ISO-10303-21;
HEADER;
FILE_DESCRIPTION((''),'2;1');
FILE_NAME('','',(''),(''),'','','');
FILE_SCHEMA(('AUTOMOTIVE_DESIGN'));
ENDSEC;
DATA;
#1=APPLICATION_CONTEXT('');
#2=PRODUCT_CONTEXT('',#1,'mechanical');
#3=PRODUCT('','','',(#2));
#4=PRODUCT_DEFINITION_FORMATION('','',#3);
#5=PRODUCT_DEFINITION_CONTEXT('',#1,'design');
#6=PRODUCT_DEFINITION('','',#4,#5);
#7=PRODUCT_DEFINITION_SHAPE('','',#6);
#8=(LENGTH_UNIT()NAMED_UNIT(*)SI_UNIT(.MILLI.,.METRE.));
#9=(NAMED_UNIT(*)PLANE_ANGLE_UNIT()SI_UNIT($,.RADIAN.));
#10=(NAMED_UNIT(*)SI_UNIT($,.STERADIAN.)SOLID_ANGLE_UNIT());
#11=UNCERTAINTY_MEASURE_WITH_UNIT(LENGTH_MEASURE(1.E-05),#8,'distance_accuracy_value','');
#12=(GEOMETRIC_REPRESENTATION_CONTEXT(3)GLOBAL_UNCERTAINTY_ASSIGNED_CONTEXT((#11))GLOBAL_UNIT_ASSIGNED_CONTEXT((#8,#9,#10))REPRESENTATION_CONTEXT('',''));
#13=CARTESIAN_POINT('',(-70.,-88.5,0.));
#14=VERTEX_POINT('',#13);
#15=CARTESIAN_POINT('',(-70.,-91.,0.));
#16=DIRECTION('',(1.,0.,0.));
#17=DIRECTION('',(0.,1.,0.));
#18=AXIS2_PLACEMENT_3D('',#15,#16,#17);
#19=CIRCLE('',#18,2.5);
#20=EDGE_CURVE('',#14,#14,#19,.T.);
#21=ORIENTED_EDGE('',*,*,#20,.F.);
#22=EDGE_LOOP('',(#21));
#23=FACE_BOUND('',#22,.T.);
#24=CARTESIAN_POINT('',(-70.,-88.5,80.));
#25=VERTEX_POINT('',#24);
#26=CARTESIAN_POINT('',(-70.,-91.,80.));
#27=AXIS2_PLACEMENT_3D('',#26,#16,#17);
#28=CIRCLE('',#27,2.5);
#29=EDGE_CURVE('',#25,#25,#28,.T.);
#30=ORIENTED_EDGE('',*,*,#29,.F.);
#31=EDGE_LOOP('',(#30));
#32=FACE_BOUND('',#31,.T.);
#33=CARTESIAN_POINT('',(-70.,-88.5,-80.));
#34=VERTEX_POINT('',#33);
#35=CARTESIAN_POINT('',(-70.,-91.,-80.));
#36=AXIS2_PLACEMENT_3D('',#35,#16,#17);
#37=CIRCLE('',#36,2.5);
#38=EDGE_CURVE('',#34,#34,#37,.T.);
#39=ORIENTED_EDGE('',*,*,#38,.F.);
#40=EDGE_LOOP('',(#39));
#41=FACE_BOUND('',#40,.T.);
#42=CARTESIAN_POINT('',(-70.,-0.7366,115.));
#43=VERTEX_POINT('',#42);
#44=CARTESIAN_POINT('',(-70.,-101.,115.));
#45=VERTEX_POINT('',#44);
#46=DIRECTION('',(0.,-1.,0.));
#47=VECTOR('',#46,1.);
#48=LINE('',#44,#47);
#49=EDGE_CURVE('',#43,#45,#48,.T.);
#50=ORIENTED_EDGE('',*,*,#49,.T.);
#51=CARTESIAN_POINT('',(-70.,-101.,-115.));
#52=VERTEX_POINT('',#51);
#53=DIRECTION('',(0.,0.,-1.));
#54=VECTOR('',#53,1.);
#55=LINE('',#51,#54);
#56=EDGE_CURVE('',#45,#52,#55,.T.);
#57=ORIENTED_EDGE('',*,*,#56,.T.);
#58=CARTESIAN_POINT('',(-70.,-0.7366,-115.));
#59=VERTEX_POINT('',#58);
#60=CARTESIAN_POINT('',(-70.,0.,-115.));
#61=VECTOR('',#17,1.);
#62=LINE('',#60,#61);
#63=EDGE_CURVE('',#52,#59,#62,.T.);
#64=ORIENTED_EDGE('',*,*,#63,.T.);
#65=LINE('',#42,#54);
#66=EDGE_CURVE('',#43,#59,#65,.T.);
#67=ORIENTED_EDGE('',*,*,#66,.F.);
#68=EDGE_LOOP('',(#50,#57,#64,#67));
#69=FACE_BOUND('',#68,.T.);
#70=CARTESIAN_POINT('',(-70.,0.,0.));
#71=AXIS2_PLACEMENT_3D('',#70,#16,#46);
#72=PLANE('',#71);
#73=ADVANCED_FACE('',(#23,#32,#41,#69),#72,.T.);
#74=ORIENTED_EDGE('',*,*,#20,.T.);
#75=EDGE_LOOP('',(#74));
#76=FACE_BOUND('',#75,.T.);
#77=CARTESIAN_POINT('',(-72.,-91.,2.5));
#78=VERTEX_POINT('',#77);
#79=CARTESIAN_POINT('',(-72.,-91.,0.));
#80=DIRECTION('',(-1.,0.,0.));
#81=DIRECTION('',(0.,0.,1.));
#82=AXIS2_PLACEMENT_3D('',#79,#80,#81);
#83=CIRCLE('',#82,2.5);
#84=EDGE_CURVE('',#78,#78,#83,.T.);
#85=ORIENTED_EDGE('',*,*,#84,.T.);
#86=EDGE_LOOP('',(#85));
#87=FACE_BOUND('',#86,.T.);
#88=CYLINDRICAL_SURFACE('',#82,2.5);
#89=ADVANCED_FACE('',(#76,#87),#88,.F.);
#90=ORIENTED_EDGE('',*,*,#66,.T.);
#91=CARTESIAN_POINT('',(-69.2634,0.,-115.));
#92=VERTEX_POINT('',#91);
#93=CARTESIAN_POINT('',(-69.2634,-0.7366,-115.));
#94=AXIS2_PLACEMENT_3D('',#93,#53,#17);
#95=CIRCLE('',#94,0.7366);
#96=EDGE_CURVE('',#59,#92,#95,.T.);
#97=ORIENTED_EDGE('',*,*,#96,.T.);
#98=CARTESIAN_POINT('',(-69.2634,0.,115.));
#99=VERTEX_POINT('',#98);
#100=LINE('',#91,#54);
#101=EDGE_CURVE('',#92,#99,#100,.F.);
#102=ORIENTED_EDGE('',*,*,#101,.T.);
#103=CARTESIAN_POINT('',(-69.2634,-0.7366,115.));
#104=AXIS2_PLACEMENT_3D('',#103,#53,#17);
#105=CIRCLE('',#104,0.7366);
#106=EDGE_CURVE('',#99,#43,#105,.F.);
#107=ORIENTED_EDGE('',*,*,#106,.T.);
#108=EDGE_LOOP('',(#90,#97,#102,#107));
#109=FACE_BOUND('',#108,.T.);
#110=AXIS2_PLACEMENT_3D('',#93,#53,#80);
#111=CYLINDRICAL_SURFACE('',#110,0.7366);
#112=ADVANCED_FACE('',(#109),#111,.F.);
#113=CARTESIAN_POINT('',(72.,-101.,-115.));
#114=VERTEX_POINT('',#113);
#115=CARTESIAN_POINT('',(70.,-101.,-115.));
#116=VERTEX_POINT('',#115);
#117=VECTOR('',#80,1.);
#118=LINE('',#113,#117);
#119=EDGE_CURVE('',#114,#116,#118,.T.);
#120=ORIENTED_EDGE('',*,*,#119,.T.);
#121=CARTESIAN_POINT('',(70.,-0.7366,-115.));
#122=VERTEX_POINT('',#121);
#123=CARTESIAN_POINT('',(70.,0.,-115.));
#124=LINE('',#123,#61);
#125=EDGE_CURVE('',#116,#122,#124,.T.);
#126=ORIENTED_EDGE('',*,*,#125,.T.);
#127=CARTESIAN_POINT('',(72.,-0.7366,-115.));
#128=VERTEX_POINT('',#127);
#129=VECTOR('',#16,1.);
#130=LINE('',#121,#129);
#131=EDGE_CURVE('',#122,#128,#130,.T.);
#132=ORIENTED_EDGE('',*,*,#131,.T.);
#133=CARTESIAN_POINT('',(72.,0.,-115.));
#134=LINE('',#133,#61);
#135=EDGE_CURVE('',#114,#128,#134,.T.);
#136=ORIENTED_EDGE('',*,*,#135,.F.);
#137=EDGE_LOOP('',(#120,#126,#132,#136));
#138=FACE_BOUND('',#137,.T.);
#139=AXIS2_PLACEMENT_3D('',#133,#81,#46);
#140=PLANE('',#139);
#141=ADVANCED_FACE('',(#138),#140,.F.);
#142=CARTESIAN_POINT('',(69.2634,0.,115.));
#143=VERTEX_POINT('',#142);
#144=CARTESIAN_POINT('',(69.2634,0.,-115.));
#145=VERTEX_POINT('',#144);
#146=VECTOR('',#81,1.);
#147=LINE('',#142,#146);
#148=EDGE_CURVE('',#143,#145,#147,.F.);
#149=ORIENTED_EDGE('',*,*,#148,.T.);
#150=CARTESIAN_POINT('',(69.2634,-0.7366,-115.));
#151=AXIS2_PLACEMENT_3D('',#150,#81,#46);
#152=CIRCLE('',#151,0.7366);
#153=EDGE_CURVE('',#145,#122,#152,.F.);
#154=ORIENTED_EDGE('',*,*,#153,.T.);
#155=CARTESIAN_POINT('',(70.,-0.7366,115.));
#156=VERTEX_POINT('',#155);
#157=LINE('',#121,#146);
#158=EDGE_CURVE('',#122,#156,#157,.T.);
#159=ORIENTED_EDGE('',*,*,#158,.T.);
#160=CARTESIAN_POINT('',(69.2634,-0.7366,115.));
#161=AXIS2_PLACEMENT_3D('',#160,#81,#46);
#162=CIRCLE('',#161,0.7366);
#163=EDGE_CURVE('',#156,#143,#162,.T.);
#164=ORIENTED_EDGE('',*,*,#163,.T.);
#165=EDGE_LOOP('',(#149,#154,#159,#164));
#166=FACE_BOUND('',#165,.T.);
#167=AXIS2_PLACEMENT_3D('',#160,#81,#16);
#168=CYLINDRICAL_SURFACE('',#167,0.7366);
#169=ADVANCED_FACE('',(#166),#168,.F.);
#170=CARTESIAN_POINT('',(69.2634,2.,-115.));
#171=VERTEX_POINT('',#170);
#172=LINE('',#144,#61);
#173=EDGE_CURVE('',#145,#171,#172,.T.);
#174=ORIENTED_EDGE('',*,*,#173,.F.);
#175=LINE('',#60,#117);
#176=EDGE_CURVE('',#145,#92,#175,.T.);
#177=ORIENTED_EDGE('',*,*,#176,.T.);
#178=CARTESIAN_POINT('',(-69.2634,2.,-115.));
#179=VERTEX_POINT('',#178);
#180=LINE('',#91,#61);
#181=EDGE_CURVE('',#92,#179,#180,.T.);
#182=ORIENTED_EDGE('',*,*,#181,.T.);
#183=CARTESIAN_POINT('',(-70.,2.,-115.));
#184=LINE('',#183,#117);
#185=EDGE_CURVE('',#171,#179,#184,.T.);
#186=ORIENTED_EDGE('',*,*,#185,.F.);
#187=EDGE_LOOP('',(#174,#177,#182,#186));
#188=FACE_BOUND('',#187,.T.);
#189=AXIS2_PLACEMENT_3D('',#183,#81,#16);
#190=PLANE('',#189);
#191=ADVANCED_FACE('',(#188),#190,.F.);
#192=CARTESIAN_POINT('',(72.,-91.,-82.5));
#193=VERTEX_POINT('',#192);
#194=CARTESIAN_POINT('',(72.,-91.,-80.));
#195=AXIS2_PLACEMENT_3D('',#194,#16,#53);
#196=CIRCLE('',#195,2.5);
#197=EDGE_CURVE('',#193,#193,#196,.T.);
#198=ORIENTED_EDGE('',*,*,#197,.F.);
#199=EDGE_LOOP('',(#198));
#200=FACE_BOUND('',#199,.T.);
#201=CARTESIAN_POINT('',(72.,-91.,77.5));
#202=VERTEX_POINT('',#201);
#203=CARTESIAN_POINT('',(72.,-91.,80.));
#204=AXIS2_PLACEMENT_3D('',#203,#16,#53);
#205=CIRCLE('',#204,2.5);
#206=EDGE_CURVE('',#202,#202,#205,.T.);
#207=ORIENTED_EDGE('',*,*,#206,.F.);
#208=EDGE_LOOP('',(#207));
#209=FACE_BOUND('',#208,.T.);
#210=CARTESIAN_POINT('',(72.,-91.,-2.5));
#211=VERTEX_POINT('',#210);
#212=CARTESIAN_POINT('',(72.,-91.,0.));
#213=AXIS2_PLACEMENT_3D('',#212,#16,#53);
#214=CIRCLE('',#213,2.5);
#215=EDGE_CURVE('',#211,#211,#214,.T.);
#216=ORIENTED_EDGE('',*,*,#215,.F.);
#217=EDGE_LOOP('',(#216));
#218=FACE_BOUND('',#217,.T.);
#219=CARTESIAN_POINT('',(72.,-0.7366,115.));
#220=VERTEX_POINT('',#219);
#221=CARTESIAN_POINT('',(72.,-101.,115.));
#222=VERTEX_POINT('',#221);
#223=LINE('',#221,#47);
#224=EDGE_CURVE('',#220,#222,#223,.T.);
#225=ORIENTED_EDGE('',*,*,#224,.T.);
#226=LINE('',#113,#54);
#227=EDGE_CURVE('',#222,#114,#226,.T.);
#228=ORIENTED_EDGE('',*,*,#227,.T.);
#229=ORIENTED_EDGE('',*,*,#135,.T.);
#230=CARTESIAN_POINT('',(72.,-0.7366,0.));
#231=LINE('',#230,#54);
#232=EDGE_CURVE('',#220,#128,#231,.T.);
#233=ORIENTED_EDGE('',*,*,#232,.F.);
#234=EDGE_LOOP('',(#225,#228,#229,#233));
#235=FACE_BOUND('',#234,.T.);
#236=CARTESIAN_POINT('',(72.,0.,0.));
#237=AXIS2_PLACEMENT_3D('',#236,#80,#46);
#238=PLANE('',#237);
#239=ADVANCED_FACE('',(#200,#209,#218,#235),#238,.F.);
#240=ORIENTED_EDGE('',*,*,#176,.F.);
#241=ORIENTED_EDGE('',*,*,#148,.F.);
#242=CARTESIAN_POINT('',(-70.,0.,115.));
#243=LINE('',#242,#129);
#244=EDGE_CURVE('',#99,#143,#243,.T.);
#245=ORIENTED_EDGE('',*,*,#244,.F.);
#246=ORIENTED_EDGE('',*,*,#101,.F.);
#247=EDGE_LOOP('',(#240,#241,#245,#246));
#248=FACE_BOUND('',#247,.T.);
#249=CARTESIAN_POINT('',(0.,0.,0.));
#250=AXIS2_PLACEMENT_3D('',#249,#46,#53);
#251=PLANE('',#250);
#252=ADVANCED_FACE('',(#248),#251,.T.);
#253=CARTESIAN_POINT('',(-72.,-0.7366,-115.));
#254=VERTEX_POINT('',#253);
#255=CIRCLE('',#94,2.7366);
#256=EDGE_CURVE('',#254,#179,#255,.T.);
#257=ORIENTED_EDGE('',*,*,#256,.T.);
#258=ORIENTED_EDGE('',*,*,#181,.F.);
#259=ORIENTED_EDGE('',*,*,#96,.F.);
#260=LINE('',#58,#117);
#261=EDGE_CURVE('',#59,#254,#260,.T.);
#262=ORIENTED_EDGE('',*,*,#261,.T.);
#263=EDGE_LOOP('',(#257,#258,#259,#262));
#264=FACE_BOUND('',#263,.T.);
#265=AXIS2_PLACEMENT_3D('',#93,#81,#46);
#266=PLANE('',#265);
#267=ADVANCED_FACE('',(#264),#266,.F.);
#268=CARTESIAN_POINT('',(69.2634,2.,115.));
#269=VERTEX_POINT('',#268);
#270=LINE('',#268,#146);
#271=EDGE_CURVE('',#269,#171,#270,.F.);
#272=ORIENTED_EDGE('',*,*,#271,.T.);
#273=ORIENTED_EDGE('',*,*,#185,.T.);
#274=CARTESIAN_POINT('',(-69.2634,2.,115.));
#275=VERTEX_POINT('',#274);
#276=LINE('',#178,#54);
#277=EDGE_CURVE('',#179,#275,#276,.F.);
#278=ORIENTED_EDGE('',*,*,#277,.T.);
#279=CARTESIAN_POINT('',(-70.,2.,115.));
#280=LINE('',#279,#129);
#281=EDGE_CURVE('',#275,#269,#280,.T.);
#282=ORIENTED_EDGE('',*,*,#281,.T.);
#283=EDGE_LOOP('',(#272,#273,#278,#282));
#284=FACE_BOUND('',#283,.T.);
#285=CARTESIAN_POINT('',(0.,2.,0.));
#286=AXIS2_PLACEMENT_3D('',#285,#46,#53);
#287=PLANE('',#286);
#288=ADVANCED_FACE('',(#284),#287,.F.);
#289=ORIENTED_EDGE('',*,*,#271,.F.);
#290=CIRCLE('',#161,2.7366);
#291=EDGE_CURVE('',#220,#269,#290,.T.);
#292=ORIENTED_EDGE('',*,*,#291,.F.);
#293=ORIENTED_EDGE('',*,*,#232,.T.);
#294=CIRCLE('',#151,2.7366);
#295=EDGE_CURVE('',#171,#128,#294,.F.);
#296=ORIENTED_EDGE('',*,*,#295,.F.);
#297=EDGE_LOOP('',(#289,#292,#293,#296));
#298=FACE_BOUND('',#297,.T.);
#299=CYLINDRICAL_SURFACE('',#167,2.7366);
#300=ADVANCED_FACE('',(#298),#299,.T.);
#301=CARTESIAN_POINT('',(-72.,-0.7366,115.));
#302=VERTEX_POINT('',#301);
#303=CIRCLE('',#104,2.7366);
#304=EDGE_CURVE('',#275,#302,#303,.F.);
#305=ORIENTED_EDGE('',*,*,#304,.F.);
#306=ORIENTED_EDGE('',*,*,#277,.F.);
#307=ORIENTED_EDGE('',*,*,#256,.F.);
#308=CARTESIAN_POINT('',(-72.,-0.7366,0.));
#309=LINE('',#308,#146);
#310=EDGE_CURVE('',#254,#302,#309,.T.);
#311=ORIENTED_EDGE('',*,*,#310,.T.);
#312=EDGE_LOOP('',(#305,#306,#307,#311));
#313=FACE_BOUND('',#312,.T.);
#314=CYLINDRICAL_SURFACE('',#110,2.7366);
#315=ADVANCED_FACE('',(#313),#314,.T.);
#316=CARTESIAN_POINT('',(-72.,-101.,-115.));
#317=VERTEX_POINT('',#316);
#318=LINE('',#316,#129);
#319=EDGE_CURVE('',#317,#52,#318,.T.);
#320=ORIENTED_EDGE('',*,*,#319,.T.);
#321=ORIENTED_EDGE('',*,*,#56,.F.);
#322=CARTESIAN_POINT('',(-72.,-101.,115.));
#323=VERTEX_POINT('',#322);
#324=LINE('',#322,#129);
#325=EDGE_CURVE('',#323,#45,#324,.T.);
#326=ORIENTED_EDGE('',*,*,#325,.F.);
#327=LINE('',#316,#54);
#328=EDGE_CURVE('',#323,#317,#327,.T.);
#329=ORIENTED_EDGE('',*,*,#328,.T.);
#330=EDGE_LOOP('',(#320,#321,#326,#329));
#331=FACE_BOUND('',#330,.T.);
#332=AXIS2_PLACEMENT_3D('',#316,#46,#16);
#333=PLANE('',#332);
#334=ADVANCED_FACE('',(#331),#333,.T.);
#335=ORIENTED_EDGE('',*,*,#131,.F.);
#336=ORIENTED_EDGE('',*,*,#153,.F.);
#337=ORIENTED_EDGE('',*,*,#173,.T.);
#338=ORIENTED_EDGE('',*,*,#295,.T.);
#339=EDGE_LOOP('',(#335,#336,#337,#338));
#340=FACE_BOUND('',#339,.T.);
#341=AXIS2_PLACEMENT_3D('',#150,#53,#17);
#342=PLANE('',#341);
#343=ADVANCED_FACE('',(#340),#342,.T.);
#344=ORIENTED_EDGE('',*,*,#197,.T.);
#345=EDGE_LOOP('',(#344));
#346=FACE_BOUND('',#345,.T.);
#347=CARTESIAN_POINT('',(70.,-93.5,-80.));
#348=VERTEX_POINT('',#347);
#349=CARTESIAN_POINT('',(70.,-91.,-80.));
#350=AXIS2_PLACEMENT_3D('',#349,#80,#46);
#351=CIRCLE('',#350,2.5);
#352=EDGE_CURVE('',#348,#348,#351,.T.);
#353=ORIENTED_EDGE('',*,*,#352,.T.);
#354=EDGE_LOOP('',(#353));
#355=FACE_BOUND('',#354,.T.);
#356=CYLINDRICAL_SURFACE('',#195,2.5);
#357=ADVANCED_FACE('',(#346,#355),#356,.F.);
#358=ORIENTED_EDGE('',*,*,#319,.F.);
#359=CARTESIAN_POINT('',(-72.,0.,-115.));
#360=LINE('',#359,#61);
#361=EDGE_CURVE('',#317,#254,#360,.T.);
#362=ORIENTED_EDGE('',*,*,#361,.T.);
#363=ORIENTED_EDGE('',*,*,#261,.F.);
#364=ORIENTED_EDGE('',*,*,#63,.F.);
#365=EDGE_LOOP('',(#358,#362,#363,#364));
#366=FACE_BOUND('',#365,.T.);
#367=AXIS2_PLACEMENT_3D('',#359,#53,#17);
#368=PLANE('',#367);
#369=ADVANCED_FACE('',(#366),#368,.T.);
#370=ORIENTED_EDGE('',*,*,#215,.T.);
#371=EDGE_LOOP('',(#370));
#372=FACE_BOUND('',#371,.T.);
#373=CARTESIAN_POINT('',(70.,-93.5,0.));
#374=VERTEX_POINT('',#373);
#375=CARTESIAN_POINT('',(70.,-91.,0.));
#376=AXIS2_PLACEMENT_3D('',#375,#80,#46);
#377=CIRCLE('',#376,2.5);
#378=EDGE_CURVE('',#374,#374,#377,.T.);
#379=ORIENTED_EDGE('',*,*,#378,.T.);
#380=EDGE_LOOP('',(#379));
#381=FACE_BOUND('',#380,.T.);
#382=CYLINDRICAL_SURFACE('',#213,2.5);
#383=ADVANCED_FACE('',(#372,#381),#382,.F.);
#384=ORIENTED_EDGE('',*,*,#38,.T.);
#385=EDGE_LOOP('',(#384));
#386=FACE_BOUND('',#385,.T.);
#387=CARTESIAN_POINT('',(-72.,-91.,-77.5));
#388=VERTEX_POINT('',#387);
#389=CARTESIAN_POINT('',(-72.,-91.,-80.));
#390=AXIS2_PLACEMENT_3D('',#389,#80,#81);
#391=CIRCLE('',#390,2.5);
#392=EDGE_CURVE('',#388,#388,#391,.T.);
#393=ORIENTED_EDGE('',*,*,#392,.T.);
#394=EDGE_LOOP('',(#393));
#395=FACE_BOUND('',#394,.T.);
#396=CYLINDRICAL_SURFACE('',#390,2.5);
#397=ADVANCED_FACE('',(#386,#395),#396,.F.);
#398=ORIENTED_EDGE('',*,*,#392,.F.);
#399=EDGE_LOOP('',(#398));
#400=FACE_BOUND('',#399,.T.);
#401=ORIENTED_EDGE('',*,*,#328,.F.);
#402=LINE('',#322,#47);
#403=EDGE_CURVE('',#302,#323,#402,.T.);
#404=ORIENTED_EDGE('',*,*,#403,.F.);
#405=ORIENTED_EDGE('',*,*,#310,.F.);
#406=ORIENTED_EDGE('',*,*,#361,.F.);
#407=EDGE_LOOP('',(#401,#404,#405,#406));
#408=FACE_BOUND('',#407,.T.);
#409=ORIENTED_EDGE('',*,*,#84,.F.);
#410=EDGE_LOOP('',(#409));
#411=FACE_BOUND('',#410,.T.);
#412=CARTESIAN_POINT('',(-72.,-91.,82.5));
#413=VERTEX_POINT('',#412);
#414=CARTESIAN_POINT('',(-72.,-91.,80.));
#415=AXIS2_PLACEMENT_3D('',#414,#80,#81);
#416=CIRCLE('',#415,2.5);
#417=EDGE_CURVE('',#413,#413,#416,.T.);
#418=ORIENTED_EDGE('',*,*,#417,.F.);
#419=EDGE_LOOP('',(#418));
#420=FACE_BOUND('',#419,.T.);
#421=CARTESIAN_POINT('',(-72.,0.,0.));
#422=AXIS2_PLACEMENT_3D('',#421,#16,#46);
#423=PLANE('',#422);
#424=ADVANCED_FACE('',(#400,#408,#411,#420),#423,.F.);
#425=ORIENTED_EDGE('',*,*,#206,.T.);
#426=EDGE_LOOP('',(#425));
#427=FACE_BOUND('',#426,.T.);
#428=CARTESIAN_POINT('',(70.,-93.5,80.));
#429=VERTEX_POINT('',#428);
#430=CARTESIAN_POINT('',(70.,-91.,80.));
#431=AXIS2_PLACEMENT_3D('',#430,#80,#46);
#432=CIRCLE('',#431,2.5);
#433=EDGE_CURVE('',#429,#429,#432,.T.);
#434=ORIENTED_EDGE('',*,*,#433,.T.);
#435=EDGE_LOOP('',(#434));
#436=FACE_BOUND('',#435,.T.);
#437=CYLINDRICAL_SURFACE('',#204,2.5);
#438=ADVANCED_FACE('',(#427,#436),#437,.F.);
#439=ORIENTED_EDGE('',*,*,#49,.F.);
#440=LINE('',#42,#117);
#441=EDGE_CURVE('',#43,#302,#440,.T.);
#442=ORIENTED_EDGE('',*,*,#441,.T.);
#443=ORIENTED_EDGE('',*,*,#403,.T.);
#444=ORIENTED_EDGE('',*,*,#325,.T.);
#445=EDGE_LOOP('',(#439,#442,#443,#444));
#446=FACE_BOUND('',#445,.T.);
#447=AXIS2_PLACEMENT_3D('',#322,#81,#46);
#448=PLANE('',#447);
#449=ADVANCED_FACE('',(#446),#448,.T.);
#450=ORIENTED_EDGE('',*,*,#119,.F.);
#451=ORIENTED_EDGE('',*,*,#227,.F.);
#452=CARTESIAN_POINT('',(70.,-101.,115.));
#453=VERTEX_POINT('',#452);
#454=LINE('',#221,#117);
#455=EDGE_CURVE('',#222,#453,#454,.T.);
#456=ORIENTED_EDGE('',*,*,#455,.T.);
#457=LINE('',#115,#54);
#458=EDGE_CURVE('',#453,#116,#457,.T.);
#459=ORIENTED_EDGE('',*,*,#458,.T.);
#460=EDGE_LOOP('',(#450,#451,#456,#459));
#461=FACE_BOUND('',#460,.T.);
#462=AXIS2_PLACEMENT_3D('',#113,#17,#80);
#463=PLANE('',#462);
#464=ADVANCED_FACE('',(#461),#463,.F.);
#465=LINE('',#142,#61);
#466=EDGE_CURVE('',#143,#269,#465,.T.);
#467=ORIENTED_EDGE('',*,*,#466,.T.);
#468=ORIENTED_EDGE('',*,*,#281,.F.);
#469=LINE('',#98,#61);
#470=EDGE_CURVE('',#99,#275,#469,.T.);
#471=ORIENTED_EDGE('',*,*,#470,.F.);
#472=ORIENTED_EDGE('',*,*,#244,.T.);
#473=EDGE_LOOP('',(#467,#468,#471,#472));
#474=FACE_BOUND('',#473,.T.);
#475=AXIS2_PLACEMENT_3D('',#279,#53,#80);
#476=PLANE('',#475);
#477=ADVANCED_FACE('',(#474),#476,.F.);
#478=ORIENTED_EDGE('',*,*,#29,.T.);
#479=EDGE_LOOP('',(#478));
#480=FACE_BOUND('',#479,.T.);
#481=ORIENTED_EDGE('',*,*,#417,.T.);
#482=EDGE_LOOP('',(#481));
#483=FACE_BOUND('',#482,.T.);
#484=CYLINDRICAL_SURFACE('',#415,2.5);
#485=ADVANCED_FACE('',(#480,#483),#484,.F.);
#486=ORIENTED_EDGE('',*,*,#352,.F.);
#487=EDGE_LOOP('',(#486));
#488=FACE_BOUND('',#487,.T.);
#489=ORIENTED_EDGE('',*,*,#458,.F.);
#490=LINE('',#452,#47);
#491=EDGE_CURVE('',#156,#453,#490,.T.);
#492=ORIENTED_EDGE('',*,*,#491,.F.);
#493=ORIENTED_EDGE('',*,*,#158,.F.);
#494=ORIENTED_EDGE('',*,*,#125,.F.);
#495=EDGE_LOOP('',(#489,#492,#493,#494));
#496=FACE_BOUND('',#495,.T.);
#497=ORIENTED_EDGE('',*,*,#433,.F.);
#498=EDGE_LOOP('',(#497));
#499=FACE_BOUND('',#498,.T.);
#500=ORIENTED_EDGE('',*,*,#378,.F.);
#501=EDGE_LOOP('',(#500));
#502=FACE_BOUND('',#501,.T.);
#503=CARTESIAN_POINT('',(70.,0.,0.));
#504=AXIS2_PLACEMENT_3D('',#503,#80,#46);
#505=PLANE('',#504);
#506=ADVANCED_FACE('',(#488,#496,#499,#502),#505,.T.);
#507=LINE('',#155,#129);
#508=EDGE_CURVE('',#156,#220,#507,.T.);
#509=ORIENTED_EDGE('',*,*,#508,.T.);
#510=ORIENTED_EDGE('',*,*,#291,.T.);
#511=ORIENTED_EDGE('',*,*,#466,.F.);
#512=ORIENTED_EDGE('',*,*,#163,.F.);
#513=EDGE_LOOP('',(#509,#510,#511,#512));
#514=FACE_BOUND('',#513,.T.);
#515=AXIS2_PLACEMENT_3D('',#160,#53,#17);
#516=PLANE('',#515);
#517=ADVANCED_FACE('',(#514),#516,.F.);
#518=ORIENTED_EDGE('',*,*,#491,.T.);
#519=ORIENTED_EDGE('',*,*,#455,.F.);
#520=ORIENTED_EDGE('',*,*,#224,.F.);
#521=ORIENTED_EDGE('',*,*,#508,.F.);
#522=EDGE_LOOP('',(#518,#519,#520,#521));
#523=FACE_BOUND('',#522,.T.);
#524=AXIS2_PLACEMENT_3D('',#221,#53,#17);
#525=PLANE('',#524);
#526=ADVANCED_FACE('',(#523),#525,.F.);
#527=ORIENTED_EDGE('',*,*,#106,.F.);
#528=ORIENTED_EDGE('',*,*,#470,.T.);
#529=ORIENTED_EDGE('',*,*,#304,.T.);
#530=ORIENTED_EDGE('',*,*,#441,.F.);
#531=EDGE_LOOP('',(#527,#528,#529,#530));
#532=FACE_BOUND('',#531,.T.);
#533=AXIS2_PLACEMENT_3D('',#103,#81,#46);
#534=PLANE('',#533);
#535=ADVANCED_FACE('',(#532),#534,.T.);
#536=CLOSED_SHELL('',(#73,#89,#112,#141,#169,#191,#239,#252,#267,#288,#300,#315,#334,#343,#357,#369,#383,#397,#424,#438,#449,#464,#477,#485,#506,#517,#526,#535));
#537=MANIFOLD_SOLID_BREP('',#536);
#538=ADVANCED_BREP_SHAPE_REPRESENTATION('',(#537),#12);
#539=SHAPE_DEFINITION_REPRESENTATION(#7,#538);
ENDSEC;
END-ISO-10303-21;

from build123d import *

# Parameters (mm, degrees)
SKETCH2_W                    = 140
SKETCH2_H                    = 230
BASE_FLANGE1_DEPTH           = 2
EDGE_FLANGE1_STRIP_W         = 9.4732
EDGE_FLANGE1_STRIP_H         = 2
EDGE_FLANGE1_STRIP_CUT_DEPTH = 230
EDGE_FLANGE1_DEPTH           = 230
F_5_0_5_DIAMETER_HOLE1_D     = 5
F_5_0_5_DIAMETER_HOLE1_DEPTH = 144


# Sheet-metal steps are written as plain solids
with BuildPart() as part:
    # Sketch2 → Base-Flange1 (new body)
    with BuildSketch(Plane(origin=(0, 0, 0), x_dir=(1, 0, 0), z_dir=(0, 1, 0))):
        Rectangle(SKETCH2_W, SKETCH2_H)
    extrude(amount=BASE_FLANGE1_DEPTH)

    # Edge-Flange1 strip (across the edge) → Edge-Flange1 strip cut (cut)
    with BuildSketch(Plane(origin=(70, 0, -115), x_dir=(-1, 0, 0), z_dir=(0, 0, 1))):
        with Locations((-4, -1)):
            Rectangle(EDGE_FLANGE1_STRIP_W, EDGE_FLANGE1_STRIP_H)
    edge_flange1_strip_cut = extrude(amount=EDGE_FLANGE1_STRIP_CUT_DEPTH, mode=Mode.SUBTRACT)

    # Edge-Flange1 section (across the edge) → Edge-Flange1 (add)
    with BuildSketch(Plane(origin=(70, 0, -115), x_dir=(-1, 0, 0), z_dir=(0, 0, 1))):
        with BuildLine():
            Line((-2, 0.7366), (-2, 101))
            Line((-2, 101), (0, 101))
            Line((0, 101), (0, 0.7366))
            ThreePointArc((0, 0.7366), (0.215745145, 0.215745145), (0.7366, 0))
            Line((0.7366, 0), (0.7366, -2))
            ThreePointArc((0.7366, -2), (-1.198468417, -1.198468417), (-2, 0.7366))
        make_face()
    edge_flange1 = extrude(amount=EDGE_FLANGE1_DEPTH)

    # Ø5.0 (5) Diameter Hole1
    with Locations(Plane(origin=(72, 0, 0), x_dir=(0, 0, -1), z_dir=(1, 0, 0))):
        with Locations((0, -91), (80, -91), (-80, -91)):
            f_5_0_5_diameter_hole1 = Hole(F_5_0_5_DIAMETER_HOLE1_D / 2, depth=F_5_0_5_DIAMETER_HOLE1_DEPTH)

    # Mirror1: Edge-Flange1 strip cut, Edge-Flange1, Ø5.0 (5) Diameter Hole1 across plane
    add(edge_flange1_strip_cut.mirror(Plane(origin=(0, 0, 0), x_dir=(0, 0, 1), z_dir=(1, 0, 0))), mode=Mode.SUBTRACT)
    add(edge_flange1.mirror(Plane(origin=(0, 0, 0), x_dir=(0, 0, 1), z_dir=(1, 0, 0))))
    add(f_5_0_5_diameter_hole1.mirror(Plane(origin=(0, 0, 0), x_dir=(0, 0, 1), z_dir=(1, 0, 0))), mode=Mode.SUBTRACT)


solid = part.part
